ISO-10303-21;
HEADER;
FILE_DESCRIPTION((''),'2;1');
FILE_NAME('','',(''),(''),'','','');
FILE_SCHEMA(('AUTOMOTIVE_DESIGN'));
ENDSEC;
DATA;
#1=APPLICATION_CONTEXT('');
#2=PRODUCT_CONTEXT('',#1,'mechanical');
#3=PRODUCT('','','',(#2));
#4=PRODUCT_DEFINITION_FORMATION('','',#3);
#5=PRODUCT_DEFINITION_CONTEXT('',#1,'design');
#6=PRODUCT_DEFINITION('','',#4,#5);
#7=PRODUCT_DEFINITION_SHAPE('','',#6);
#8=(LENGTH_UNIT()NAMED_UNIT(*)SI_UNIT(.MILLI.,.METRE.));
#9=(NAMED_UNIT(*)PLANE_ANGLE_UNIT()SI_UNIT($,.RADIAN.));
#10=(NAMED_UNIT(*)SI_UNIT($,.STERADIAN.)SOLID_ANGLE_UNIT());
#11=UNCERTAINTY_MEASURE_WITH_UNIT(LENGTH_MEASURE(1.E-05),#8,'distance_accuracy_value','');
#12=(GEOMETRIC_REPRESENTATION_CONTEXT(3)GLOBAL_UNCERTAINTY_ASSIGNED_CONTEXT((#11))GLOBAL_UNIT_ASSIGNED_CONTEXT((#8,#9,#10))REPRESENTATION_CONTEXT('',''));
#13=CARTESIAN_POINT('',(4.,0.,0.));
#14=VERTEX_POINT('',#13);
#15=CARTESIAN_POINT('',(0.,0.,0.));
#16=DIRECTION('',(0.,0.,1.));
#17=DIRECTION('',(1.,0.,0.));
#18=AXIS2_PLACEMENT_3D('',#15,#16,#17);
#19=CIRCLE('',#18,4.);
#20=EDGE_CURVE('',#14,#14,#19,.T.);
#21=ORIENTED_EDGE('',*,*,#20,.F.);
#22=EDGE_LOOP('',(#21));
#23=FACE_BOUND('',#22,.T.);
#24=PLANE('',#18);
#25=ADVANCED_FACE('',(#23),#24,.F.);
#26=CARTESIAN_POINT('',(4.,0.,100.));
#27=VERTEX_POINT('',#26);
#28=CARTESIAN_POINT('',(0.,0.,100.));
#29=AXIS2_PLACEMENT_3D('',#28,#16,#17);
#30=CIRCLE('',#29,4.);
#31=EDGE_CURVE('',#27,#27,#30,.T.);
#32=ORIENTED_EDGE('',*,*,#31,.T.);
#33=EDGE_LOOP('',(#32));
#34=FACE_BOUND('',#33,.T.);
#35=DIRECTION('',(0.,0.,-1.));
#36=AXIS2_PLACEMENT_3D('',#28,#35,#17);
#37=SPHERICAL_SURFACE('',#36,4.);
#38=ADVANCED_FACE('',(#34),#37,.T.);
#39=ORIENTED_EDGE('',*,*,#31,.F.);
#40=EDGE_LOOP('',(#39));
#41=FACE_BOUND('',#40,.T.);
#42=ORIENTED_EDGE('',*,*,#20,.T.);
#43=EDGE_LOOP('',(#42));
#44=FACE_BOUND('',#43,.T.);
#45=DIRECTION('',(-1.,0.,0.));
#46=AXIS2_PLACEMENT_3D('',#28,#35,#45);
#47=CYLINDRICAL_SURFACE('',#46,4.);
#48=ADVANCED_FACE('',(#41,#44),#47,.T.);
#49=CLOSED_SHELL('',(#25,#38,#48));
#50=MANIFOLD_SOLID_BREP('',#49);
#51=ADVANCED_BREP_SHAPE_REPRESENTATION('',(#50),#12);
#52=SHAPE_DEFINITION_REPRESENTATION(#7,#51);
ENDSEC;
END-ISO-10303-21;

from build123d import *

# Parameters (mm, degrees)
SKETCH1_R           = 4
BOSS_EXTRUDE1_DEPTH = 100


with BuildPart() as part:
    # Sketch1 → Boss-Extrude1 (new body)
    with BuildSketch(Plane.XY):
        Circle(SKETCH1_R)
    extrude(amount=BOSS_EXTRUDE1_DEPTH)

    # Sketch2 → Revolve2 (revolve)
    with BuildSketch(Plane(origin=(0, 0, 0), x_dir=(1, 0, 0), z_dir=(0, 1, 0))):
        with BuildLine():
            Line((4, -100), (0, -100))
            Line((0, -100), (0, -104))
            ThreePointArc((0, -104), (2.828427125, -102.828427125), (4, -100))
        make_face()
    revolve(axis=Axis((0, 0, 100), (0, 0, 1)))


solid = part.part
